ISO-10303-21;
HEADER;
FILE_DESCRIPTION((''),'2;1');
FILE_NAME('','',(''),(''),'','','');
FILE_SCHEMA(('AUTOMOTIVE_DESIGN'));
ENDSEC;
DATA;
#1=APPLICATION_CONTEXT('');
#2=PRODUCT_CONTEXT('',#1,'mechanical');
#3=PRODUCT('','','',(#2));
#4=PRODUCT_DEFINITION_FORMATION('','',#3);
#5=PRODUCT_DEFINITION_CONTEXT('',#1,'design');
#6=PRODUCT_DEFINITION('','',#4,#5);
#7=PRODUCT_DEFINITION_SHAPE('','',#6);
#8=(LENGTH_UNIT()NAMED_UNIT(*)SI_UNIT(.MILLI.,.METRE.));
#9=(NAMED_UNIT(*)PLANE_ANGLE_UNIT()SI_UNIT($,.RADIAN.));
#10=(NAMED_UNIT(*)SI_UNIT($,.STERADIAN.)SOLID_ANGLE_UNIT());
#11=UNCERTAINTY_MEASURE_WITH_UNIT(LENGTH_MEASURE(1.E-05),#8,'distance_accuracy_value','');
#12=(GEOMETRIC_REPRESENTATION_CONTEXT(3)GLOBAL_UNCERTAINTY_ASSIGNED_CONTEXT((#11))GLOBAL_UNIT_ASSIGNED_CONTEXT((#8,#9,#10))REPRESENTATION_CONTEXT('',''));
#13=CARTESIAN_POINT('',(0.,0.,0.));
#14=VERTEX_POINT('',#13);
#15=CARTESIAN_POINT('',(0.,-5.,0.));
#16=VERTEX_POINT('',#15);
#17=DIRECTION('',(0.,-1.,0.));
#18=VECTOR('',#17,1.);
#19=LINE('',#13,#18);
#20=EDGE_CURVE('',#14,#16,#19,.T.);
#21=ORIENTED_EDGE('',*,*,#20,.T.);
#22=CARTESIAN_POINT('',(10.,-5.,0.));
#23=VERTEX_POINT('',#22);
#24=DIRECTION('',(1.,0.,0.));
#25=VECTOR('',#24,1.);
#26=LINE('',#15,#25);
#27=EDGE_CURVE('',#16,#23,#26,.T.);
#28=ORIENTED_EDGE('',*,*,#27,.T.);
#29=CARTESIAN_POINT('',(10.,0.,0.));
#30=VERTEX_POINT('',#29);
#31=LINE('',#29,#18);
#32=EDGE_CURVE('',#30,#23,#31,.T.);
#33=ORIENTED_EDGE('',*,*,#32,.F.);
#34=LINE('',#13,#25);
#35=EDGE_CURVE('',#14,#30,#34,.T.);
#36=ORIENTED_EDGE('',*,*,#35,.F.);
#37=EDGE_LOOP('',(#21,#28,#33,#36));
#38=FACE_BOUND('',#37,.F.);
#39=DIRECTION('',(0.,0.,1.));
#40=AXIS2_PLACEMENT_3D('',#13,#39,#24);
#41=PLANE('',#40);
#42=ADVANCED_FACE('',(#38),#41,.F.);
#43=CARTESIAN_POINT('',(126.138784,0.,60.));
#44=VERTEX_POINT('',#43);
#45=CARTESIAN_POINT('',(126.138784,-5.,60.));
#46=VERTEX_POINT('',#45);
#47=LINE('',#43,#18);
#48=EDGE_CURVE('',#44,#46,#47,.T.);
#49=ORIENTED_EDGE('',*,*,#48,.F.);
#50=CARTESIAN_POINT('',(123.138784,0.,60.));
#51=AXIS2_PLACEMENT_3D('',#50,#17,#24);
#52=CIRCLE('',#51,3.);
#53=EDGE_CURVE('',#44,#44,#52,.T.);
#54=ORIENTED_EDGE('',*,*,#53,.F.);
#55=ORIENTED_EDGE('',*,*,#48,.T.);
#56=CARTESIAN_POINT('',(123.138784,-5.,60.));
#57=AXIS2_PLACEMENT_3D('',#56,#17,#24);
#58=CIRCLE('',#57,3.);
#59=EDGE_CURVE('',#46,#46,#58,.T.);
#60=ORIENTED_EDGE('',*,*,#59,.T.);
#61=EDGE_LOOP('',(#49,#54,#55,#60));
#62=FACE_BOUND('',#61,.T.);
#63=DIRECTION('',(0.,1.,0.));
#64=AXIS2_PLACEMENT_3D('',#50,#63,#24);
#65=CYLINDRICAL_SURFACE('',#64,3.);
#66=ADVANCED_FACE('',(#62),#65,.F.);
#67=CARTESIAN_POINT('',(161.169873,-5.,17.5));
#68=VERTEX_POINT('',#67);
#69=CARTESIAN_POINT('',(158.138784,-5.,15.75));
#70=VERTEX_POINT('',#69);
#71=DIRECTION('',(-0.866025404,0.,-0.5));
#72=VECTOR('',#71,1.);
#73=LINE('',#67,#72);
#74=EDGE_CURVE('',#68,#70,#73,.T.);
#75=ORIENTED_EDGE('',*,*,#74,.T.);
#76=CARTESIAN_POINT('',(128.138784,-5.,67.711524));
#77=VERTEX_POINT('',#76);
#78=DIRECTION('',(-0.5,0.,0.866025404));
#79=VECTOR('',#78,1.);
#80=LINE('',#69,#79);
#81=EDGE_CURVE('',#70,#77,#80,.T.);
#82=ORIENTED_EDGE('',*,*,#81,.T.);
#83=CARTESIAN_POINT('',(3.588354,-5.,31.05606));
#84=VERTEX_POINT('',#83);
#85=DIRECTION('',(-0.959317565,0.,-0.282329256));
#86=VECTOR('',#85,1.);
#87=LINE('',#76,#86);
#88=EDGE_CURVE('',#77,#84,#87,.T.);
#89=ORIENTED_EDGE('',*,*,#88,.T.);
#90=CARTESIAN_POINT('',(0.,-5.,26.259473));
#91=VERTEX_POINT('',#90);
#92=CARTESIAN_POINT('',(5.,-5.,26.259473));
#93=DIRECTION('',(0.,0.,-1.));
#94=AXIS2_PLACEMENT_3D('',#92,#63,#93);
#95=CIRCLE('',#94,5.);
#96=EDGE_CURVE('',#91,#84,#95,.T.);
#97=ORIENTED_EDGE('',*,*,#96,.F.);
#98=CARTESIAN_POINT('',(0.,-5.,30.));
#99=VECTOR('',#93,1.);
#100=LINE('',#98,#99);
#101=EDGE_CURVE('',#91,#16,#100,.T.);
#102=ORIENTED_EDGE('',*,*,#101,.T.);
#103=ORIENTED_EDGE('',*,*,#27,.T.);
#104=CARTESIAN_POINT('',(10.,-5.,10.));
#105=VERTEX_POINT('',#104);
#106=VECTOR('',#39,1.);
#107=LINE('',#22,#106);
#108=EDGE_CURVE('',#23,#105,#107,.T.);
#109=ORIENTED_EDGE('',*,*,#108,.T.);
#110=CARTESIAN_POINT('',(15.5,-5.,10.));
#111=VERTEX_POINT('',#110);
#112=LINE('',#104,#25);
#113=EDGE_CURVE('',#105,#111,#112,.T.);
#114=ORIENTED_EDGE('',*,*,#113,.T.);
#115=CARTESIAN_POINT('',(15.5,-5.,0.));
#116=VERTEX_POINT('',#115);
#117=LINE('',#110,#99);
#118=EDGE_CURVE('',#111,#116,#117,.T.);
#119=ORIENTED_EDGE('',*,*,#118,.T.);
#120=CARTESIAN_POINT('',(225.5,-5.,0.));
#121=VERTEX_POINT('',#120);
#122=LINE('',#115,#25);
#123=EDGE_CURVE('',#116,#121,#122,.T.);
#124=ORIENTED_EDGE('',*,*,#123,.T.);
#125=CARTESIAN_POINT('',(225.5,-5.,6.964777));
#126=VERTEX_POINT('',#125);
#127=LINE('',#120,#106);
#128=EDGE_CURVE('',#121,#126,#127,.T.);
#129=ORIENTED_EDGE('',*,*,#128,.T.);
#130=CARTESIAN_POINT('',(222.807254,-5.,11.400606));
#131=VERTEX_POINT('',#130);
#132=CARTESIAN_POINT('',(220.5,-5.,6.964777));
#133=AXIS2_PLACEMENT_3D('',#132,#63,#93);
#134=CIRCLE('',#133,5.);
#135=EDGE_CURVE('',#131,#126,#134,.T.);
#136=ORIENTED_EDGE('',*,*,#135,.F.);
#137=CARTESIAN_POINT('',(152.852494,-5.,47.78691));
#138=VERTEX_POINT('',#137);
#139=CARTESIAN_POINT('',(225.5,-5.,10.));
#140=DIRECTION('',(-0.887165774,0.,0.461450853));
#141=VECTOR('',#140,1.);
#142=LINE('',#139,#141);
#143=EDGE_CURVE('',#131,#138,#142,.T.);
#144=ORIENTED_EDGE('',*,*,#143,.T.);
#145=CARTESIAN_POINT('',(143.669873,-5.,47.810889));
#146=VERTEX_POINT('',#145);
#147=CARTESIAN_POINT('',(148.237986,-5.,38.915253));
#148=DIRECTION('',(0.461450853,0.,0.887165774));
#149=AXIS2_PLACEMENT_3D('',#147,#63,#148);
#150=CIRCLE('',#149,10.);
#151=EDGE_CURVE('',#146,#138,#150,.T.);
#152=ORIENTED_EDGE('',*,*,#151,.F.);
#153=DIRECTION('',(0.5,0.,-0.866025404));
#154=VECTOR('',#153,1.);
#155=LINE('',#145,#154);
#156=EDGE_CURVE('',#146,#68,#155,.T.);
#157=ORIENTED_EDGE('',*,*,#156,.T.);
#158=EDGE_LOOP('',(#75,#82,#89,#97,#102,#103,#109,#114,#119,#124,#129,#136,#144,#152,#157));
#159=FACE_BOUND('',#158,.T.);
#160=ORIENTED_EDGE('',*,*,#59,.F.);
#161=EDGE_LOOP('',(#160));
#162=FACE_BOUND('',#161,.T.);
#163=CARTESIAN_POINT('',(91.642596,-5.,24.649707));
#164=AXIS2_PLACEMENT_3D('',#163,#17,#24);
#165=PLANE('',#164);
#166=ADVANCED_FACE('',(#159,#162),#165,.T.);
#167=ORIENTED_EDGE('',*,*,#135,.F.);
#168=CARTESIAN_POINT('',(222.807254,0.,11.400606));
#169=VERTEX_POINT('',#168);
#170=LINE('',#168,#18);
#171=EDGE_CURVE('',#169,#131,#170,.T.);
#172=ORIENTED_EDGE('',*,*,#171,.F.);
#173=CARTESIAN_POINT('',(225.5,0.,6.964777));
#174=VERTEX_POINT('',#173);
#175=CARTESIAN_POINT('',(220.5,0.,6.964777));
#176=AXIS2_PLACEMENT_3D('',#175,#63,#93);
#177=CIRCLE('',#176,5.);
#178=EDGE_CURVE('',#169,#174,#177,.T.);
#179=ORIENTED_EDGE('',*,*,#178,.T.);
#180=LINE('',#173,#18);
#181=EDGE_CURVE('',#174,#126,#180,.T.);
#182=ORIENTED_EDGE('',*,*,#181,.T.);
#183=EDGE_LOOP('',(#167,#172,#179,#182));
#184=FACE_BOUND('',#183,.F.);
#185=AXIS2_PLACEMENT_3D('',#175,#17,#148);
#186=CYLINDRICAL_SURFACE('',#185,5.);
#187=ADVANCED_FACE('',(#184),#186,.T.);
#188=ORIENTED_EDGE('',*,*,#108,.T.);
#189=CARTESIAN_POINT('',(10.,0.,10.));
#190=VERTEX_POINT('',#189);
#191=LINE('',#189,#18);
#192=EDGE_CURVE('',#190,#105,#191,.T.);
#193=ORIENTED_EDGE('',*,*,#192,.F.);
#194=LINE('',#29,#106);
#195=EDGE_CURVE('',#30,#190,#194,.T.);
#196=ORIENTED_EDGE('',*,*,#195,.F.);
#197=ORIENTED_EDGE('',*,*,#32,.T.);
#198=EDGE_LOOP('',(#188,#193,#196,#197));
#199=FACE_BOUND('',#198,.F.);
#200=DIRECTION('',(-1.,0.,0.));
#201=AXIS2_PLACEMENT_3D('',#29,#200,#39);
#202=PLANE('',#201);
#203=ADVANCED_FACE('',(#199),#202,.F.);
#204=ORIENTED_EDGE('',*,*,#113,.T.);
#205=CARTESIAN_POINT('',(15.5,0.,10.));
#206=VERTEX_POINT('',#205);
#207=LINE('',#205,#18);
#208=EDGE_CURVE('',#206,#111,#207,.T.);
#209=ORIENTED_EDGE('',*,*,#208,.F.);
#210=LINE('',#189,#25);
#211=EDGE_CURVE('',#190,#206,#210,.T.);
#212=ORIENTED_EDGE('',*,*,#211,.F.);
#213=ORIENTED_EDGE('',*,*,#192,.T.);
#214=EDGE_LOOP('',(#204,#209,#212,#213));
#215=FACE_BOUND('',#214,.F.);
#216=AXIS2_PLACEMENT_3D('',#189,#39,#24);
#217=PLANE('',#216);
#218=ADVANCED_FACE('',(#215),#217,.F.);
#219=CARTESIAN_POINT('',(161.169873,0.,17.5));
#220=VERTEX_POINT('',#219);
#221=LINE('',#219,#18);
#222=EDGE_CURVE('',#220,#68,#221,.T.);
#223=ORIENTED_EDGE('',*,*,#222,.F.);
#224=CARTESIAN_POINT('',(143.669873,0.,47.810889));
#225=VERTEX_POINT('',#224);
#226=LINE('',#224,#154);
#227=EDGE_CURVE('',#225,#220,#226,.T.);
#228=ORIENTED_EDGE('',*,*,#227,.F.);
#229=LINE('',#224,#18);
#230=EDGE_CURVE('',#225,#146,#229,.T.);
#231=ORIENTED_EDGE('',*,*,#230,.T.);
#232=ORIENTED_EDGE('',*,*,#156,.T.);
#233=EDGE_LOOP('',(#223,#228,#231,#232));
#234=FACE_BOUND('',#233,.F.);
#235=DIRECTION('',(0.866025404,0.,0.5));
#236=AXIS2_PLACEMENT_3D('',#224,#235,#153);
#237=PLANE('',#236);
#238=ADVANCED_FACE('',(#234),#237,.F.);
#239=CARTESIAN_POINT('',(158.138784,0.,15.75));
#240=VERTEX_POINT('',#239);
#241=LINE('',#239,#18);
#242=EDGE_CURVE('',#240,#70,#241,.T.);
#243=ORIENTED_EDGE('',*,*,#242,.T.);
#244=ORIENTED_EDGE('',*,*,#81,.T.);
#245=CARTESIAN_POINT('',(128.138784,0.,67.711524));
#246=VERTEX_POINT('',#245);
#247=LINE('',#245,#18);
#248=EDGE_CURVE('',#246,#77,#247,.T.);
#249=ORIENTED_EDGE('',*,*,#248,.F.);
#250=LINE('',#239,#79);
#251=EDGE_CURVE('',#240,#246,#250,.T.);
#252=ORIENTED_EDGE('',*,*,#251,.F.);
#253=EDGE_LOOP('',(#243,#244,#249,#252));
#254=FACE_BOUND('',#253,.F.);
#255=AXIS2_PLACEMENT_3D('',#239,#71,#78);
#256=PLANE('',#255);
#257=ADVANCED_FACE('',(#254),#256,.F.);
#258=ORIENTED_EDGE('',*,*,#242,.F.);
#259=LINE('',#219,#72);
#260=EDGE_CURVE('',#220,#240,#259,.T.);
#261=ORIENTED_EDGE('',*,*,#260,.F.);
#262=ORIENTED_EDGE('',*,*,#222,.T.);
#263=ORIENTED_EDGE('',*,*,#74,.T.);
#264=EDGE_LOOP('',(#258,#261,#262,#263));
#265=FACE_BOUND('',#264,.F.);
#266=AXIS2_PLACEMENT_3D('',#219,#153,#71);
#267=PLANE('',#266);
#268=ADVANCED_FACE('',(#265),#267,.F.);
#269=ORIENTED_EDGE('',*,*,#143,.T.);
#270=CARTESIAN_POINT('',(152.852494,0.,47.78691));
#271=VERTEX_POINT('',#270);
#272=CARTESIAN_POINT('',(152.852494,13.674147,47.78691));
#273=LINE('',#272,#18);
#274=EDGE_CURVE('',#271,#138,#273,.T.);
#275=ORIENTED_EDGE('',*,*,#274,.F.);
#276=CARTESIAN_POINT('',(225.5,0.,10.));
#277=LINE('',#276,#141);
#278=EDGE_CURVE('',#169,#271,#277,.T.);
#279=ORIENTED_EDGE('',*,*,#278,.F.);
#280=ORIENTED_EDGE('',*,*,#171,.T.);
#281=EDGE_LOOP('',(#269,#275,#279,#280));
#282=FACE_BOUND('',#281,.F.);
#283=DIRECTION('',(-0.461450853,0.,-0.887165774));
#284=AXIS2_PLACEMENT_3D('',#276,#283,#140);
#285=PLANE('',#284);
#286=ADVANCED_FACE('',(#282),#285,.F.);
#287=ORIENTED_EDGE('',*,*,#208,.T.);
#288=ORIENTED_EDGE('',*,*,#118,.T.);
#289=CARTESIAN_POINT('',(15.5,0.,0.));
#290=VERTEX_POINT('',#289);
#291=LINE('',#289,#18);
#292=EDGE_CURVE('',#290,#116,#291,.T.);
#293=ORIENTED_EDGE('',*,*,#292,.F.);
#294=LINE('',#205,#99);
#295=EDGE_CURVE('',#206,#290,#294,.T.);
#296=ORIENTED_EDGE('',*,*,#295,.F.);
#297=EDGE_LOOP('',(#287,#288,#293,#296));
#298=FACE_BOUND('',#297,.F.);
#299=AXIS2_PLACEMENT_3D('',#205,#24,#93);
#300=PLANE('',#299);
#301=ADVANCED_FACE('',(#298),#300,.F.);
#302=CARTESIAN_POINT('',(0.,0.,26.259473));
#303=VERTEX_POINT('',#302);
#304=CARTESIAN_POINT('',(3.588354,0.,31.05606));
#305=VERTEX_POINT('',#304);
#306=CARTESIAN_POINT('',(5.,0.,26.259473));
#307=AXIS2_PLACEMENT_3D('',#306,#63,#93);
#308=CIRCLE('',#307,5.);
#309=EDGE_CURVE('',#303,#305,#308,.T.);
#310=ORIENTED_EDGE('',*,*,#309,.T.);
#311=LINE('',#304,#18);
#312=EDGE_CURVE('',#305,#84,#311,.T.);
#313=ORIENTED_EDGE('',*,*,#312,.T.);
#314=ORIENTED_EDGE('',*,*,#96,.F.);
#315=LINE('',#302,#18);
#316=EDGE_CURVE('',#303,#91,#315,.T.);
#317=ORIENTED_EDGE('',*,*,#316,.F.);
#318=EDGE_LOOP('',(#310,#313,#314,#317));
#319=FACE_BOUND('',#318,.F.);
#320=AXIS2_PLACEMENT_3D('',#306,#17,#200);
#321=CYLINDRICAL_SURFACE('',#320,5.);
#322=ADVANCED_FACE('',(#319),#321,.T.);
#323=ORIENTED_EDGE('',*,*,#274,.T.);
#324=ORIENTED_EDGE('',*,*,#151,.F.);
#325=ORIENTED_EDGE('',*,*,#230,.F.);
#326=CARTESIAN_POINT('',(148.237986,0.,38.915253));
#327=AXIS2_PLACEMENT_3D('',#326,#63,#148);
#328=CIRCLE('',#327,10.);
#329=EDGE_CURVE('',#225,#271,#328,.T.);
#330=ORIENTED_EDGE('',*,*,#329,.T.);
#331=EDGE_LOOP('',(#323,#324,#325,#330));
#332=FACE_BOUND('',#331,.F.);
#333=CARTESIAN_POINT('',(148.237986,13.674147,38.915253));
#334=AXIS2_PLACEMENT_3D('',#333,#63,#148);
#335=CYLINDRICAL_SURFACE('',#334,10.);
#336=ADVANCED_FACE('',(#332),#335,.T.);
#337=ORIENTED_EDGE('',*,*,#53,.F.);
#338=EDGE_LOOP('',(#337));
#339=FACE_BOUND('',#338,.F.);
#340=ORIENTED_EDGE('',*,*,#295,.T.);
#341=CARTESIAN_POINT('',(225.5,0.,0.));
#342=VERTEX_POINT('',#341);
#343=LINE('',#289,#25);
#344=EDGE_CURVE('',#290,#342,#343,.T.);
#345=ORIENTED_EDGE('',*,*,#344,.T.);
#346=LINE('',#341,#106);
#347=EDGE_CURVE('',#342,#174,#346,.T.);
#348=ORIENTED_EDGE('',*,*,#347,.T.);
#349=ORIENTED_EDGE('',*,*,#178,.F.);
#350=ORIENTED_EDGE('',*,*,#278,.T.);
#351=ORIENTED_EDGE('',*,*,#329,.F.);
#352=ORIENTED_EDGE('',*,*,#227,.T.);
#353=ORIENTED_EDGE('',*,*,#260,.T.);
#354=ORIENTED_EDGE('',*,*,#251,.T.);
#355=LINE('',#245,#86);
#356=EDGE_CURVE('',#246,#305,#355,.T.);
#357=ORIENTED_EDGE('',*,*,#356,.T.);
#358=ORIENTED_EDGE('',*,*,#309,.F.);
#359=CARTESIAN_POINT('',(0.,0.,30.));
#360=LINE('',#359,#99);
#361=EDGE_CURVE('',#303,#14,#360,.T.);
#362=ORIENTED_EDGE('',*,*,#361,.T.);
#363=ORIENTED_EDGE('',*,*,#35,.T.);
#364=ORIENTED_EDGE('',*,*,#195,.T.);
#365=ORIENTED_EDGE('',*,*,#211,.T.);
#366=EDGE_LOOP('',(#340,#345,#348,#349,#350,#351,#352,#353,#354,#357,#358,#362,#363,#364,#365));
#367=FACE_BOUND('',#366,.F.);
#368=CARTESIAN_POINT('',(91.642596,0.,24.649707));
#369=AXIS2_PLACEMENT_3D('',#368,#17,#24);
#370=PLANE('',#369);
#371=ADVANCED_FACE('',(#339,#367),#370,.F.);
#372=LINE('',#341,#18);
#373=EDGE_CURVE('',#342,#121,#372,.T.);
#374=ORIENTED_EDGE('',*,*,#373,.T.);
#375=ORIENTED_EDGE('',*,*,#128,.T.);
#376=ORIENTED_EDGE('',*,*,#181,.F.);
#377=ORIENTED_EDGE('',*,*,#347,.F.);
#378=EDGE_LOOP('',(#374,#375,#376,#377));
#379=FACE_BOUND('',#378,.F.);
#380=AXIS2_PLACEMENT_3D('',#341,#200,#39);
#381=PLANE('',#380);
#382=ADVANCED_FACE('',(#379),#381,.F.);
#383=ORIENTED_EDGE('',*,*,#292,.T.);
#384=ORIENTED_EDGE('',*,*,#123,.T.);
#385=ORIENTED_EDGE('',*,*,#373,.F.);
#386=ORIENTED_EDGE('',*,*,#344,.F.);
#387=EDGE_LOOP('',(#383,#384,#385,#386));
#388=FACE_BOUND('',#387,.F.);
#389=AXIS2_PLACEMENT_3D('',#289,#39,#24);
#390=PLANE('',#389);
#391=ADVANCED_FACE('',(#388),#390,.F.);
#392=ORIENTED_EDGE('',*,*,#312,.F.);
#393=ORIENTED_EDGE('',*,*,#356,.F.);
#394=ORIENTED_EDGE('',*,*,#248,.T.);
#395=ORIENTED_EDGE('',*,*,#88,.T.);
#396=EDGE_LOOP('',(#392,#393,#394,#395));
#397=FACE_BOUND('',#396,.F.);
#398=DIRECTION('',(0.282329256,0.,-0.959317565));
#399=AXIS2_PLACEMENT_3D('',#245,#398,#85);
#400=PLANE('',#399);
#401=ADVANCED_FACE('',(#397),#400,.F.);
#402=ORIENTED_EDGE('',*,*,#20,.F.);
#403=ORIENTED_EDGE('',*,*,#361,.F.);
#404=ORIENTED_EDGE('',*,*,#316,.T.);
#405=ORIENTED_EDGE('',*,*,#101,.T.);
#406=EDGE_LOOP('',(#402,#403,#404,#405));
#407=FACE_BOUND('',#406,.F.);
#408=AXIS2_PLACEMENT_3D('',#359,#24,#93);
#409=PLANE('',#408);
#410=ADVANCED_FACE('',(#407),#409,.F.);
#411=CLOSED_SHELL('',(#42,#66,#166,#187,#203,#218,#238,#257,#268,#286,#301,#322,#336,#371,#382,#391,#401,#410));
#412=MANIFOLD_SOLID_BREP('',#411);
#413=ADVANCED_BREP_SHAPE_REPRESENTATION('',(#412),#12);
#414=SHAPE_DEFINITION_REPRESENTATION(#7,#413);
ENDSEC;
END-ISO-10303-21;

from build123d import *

# Parameters (mm, degrees)
F0_R        = 3
F1_DEPTH    = 5
F2_T1_DEPTH = 32.3482938807
F3_R        = 5


# Not quite as in the source:
# - a fillet or chamfer that OpenCascade refuses, or shapes differently, is made with other operations: its cross-section is extruded or revolved along the edge and cut away or added


with BuildPart() as f1:
    # F0 (on Front) → F1 (new body)
    with BuildSketch(Plane.XZ):
        Polygon((0, 30), (0, 0), (10, 0), (10, 10), (15.5, 10), (15.5, 0), (165.5, 0), (165.5, 20), (148, 50.3108891325), (143.6698729811, 47.8108891325), (161.1698729811, 17.5), (158.1387840678, 15.75), (128.1387840678, 67.7115242271), align=None)
        with Locations((123.1387840678, 60)):
            Circle(F0_R, mode=Mode.SUBTRACT)
        Polygon((165.5, 20), (165.5, 0), (225.5, 0), (225.5, 10), (148, 50.3108891325), align=None)
    extrude(amount=F1_DEPTH)

    # F2: fillet of radius 10 on 1 edges, made by hand

    # F2_s2 → F2_t1 (cut)
    with BuildSketch(Plane.XZ.offset(-13.6741469404)):
        with BuildLine():
            ThreePointArc((152.8524940595, 47.7869104222), (148.2640985796, 48.9152185915), (143.6698729811, 47.8108891325))
            Line((143.6698729811, 47.8108891325), (148, 50.3108891325))
            Line((148, 50.3108891325), (152.8524940595, 47.7869104222))
        make_face()
    extrude(amount=F2_T1_DEPTH, mode=Mode.SUBTRACT)

    # F3
    f3_edges = [f1.edges().sort_by_distance(p)[0] for p in [
        (225.5, -2.5, 10),
        (0, -2.5, 30),
    ]]
    fillet(f3_edges, radius=F3_R)


solid = f1.part
